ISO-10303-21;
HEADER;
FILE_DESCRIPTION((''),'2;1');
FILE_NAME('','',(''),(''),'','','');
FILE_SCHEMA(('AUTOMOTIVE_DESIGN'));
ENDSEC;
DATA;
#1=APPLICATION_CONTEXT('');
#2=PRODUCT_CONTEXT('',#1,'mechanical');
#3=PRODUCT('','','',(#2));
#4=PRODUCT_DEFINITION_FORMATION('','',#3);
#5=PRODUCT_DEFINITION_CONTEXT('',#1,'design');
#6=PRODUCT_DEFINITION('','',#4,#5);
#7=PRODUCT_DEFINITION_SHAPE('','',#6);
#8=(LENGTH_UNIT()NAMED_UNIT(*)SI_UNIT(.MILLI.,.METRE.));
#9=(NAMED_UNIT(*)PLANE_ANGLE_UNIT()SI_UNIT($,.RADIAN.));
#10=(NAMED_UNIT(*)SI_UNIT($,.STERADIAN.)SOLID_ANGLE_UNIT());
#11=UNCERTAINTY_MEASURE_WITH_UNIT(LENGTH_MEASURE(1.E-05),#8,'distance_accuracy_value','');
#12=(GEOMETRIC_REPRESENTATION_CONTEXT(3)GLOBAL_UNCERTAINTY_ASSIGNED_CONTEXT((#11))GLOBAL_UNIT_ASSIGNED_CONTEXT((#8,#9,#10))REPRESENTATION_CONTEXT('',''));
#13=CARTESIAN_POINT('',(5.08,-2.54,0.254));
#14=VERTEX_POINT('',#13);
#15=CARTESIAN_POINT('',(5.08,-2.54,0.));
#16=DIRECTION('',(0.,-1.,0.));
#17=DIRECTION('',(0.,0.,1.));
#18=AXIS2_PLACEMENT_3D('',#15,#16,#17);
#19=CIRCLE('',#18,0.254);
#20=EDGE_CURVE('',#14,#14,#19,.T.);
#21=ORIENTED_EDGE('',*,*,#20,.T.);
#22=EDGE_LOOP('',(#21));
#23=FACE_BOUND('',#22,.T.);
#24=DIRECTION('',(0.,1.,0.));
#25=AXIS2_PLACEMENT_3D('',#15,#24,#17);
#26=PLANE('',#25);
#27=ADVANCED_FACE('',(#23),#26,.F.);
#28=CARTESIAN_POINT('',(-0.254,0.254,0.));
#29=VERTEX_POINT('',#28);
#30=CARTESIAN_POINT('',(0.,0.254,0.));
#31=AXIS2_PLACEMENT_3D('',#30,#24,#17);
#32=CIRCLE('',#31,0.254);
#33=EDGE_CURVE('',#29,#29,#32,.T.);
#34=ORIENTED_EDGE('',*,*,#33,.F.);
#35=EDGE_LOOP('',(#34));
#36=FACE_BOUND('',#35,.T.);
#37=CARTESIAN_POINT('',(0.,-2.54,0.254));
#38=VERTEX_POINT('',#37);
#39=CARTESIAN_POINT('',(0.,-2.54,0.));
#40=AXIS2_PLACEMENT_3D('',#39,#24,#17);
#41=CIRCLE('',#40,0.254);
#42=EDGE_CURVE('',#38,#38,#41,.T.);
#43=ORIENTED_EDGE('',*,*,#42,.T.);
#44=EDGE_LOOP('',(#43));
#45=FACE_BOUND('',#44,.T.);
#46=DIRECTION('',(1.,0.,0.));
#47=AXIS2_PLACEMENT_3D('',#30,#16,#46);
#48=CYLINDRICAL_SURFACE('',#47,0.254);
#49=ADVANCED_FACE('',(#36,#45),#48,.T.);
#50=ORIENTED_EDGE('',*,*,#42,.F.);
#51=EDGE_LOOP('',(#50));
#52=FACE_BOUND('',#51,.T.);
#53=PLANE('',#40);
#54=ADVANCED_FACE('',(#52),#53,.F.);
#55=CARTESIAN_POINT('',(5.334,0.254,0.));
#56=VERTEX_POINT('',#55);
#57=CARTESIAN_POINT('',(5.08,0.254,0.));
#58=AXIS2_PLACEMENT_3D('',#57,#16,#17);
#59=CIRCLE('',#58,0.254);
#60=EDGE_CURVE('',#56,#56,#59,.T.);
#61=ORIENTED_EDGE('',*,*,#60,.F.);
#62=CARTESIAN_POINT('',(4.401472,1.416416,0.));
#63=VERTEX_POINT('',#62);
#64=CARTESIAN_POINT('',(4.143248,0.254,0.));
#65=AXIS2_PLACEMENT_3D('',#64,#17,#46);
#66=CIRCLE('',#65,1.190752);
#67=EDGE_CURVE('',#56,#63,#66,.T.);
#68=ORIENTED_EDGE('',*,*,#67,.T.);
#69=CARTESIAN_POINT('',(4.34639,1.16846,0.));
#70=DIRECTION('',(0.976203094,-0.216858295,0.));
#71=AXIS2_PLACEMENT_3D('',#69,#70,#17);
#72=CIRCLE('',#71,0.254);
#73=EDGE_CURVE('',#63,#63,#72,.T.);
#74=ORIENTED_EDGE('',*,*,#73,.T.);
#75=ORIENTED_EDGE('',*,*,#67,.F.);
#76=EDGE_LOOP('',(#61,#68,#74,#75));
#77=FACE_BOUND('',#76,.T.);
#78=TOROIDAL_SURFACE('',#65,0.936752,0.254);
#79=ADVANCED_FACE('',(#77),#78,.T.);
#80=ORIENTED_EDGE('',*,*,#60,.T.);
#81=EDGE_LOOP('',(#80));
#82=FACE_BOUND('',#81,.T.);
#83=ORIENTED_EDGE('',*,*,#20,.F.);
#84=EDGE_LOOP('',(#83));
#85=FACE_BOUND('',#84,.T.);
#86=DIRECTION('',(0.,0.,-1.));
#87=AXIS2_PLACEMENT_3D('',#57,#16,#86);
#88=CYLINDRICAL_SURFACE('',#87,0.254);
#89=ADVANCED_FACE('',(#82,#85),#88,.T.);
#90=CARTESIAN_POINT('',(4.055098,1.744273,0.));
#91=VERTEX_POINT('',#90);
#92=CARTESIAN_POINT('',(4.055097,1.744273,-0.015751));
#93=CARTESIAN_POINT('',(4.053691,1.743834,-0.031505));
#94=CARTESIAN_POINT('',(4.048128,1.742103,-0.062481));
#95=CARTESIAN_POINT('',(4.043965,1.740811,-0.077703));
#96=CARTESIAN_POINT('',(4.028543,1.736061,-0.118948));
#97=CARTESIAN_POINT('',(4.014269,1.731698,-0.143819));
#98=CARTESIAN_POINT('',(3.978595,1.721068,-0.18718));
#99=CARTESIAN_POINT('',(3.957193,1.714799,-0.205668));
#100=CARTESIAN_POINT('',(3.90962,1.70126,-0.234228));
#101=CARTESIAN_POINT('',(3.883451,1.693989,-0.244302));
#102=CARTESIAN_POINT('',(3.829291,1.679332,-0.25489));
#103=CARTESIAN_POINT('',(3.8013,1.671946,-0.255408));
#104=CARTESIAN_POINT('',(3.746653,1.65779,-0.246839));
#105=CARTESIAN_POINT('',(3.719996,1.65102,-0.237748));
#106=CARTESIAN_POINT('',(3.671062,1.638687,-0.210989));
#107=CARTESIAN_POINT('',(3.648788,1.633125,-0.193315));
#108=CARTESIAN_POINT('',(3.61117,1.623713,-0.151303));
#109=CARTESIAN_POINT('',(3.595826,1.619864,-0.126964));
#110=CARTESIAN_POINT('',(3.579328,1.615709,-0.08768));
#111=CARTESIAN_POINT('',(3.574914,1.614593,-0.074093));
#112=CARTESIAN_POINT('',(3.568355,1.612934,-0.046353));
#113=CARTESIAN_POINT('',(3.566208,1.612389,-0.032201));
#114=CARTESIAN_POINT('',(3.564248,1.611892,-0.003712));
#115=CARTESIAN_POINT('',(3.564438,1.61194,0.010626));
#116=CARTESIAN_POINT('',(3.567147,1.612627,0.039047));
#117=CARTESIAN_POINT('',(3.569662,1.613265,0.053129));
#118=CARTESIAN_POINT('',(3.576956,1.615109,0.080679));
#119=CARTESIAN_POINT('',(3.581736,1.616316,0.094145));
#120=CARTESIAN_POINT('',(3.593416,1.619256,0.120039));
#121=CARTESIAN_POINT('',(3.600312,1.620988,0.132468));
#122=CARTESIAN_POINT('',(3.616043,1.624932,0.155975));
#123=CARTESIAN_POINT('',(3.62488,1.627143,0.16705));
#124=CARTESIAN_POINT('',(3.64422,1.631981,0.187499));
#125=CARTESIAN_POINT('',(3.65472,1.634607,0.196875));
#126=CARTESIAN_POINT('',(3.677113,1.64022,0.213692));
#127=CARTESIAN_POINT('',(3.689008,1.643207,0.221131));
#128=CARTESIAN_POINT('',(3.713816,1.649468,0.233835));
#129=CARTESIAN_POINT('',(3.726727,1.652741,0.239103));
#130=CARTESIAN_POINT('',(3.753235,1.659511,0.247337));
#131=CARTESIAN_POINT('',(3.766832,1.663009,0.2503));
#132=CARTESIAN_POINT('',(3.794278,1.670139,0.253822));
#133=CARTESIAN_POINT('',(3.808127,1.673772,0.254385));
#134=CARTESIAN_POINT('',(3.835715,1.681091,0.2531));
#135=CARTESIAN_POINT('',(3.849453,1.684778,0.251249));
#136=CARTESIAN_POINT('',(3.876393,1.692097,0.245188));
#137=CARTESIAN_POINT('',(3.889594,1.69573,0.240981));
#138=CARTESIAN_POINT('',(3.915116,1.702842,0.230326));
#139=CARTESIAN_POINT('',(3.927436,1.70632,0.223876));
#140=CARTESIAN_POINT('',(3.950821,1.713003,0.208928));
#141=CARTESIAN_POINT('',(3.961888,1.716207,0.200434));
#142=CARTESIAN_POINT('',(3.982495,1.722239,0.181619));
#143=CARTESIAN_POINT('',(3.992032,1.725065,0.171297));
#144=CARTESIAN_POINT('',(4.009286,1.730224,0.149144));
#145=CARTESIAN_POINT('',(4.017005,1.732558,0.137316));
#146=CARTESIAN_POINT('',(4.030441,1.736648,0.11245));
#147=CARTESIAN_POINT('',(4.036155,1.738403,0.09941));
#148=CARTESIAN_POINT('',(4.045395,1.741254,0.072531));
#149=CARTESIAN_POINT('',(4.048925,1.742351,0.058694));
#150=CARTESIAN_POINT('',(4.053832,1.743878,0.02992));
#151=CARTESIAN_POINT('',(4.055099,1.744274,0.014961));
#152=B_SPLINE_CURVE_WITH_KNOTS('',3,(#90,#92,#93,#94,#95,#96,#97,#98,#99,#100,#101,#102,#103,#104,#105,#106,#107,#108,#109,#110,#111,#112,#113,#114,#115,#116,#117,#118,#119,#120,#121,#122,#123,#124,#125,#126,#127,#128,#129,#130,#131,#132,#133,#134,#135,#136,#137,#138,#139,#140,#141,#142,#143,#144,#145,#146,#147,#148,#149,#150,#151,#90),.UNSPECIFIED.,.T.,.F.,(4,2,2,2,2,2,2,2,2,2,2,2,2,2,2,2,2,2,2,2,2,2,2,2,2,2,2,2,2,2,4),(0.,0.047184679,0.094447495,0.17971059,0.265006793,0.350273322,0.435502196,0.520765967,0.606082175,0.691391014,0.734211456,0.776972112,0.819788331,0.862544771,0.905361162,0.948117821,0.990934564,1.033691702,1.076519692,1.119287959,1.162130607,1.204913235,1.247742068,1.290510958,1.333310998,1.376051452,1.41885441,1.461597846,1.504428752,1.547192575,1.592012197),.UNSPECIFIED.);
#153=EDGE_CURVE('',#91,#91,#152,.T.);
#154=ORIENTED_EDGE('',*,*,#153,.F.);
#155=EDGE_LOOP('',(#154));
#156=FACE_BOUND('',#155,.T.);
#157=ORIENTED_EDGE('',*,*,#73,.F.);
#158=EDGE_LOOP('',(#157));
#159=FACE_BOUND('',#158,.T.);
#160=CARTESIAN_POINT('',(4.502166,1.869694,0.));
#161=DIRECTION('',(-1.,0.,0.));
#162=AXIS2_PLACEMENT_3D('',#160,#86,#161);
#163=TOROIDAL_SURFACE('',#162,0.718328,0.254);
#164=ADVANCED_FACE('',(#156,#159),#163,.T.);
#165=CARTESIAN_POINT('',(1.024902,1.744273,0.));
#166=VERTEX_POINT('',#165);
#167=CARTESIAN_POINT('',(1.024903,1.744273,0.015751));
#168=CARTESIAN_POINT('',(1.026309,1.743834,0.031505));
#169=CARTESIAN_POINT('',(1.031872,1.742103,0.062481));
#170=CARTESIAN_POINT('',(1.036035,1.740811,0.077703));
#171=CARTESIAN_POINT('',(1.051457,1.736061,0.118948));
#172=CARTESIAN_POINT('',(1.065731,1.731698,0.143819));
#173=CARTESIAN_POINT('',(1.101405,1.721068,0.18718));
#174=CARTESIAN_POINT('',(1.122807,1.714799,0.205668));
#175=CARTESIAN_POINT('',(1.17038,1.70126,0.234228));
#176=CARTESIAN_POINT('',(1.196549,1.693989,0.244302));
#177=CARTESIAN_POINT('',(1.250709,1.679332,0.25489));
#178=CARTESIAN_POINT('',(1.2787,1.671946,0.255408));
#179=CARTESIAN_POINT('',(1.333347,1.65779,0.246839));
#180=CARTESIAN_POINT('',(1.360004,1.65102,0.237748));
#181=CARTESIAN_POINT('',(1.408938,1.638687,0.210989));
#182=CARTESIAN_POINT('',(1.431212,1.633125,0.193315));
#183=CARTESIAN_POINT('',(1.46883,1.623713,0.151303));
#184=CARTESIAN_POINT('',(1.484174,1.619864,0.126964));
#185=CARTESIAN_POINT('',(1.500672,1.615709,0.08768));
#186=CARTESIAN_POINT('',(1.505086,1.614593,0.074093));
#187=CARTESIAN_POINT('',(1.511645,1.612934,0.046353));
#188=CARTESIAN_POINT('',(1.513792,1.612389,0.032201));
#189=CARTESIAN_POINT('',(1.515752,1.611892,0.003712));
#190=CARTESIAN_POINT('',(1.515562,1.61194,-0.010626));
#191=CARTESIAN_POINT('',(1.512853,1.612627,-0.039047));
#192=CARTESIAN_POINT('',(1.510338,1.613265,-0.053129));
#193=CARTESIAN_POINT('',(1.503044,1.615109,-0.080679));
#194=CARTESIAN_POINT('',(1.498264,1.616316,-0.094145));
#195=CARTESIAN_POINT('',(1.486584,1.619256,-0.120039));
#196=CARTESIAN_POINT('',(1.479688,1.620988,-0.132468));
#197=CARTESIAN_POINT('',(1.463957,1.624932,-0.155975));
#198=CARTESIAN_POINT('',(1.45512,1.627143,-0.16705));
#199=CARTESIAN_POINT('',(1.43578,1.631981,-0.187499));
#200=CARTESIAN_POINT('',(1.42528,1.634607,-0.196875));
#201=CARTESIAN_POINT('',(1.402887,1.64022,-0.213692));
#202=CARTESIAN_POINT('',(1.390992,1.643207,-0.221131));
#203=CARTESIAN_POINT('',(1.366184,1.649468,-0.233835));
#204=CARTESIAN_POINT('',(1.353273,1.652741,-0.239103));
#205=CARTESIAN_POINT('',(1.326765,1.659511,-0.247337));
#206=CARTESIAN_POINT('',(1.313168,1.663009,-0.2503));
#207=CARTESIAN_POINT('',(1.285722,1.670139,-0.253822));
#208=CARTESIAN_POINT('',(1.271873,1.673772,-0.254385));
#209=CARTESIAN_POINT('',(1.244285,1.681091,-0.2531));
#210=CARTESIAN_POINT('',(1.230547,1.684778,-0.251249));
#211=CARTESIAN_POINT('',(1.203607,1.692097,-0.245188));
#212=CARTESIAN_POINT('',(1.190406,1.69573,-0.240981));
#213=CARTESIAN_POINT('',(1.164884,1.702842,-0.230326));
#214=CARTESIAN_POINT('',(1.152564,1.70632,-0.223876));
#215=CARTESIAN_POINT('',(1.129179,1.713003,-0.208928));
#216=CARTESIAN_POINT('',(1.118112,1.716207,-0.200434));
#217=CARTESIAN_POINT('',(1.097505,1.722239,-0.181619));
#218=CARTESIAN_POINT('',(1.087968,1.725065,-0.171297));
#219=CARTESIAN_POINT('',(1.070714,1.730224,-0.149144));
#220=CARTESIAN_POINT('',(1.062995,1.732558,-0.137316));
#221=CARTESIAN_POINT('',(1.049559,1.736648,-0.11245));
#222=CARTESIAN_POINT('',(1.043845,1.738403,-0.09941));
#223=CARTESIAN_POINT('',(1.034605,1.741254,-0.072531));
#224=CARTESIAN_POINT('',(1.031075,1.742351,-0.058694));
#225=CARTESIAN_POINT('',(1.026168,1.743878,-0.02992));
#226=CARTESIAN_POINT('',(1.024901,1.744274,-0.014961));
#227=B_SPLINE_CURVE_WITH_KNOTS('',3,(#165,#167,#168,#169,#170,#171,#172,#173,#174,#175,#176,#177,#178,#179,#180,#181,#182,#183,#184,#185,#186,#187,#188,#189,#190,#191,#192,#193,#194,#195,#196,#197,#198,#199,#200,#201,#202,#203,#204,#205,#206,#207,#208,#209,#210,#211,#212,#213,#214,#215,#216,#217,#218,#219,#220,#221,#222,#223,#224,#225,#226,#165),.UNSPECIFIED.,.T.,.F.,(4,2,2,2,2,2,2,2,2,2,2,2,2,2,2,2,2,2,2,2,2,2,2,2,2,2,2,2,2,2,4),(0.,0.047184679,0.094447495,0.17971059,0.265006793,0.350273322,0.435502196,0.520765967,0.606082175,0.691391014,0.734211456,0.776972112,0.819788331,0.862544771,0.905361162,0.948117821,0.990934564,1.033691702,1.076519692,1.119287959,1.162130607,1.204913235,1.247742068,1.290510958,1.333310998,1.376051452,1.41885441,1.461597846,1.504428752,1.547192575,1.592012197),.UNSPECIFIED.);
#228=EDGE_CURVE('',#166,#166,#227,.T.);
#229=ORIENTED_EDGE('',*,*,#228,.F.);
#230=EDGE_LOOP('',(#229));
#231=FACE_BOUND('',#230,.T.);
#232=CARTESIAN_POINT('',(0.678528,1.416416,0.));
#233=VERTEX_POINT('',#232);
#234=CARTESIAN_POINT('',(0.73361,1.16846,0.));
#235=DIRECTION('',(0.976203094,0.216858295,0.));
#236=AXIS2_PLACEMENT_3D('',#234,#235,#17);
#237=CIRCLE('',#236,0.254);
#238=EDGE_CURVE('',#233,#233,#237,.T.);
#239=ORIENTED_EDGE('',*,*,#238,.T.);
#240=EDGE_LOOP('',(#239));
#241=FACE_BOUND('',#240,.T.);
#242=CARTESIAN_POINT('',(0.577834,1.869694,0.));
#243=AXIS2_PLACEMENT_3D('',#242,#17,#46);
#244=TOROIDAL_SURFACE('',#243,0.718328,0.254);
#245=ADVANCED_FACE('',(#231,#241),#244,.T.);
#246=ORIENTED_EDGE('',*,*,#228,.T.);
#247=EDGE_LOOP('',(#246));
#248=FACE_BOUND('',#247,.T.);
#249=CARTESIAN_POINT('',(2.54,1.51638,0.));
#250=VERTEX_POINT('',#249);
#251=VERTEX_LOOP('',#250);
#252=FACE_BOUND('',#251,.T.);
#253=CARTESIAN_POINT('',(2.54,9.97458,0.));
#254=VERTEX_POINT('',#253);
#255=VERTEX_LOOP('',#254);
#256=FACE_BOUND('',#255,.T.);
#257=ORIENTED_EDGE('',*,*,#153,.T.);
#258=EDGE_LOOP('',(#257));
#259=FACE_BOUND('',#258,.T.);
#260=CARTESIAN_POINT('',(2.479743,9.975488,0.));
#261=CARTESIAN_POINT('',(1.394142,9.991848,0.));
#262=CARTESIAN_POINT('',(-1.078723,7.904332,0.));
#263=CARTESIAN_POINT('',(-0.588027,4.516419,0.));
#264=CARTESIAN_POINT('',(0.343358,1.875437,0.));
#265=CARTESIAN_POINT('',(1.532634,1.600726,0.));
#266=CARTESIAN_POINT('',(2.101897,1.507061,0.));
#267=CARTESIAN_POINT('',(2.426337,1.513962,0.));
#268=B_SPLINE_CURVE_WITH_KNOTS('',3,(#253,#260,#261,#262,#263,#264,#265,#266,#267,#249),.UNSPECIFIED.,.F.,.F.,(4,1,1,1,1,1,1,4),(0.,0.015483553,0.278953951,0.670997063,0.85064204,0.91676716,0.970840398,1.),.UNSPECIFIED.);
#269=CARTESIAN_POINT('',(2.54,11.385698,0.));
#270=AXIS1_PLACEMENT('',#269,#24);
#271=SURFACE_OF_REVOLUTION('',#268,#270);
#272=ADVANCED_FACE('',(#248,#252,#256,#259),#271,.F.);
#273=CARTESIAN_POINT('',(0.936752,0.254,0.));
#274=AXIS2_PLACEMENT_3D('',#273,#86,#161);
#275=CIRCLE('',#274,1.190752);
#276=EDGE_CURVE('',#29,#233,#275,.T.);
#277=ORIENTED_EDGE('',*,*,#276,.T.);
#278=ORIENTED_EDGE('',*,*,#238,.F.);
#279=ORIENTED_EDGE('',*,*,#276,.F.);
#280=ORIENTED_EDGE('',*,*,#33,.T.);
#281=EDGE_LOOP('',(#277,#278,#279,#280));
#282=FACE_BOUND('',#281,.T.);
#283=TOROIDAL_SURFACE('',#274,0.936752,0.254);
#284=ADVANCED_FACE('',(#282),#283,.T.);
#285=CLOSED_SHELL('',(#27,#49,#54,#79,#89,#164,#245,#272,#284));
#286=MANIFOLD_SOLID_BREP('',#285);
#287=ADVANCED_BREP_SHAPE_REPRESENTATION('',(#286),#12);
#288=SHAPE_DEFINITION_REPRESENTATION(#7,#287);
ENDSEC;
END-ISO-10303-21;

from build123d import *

# Parameters (mm, degrees)
SKETCH2_R = 0.254


# Read off the part's stored shape, not the designer's step: Boss-Revolve1
with BuildPart() as part:
    # Base-Sweep: sweep along a path in Sketch1
    with BuildLine(Plane.XY) as base_sweep_path:
        Line((0, -2.54), (0, 0.254))
        ThreePointArc((0, 0.254), (0.206067938, 0.840178395), (0.733609559, 1.1684602))
        ThreePointArc((0.733609559, 1.1684602), (1.13814331, 1.420195921), (1.296162, 1.869694))
    # Sketch2 → Base-Sweep (sweep)
    with BuildSketch(Plane(origin=(0, -2.54, 0), x_dir=(-1, 0, 0), z_dir=(0, 1, 0))):
        Circle(SKETCH2_R)
    base_sweep = sweep(path=base_sweep_path.line)

    # Boss-Revolve1 outline → Boss-Revolve1 (revolve)
    with BuildSketch(Plane(origin=(2.54, 0, 0), x_dir=(1, 0, 0), z_dir=(0, 0, 1))):
        with BuildLine():
            add(Edge.make_bspline(
                [(0, 9.97458), (0.034789438, 9.975104259), (0.069578876, 9.975628519), (0.104334188, 9.975628519)],
                knots=[0, 0, 0, 0, 0.008939428, 0.008939428, 0.008939428, 0.008939428], degree=3))
            Line((0, 9.97458), (0, 1.869694))
            Line((0, 1.869694), (0.989838, 1.869694))
            Line((0.989838, 1.869694), (0.989838, 9.79047937))
            add(Edge.make_bspline(
                [(0.104334188, 9.975628519), (0.129776876, 9.97562852), (0.431674151, 9.972292434), (0.729105194, 9.900343228), (0.989838, 9.79047937)],
                knots=[0.008939428, 0.008939428, 0.008939428, 0.008939428, 0.015483553, 0.086646407, 0.086646407, 0.086646407, 0.086646407], degree=3))
        make_face()
        with BuildLine():
            Line((0.989838, 1.869694), (0, 1.869694))
            Line((0, 1.869694), (0, 1.51638))
            add(Edge.make_bspline(
                [(0.196700703, 1.513588098), (0.131247283, 1.513588098), (0.065623641, 1.514984049), (0, 1.51638)],
                knots=[0.983164699, 0.983164699, 0.983164699, 0.983164699, 1, 1, 1, 1], degree=3))
            add(Edge.make_bspline(
                [(0.989838, 1.605037356), (0.981620664, 1.603413128), (0.763396717, 1.560584076), (0.502269322, 1.517618443), (0.244615949, 1.513588098), (0.196700703, 1.513588098)],
                knots=[0.914652434, 0.914652434, 0.914652434, 0.914652434, 0.91676716, 0.970840398, 0.983164699, 0.983164699, 0.983164699, 0.983164699], degree=3))
            Line((0.989838, 1.605037356), (0.989838, 1.869694))
        make_face()
        with BuildLine():
            add(Edge.make_bspline(
                [(0.989838, 9.79047937), (1.16524628, 9.716568339), (1.335381856, 9.62275499), (1.497838, 9.513170946)],
                knots=[0.086646407, 0.086646407, 0.086646407, 0.086646407, 0.134521294, 0.134521294, 0.134521294, 0.134521294], degree=3))
            Line((0.989838, 9.79047937), (0.989838, 1.869694))
            Line((0.989838, 1.869694), (1.497838, 1.869694))
            Line((1.497838, 1.869694), (1.497838, 9.513170946))
        make_face()
        with BuildLine():
            Line((1.497838, 1.869694), (0.989838, 1.869694))
            Line((0.989838, 1.869694), (0.989838, 1.605037356))
            add(Edge.make_bspline(
                [(1.497838, 1.737836694), (1.336832685, 1.678684631), (1.162426271, 1.639150937), (0.989838, 1.605037356)],
                knots=[0.870236962, 0.870236962, 0.870236962, 0.870236962, 0.914652434, 0.914652434, 0.914652434, 0.914652434], degree=3))
            Line((1.497838, 1.737836694), (1.497838, 1.869694))
        make_face()
        with BuildLine():
            add(Edge.make_bspline(
                [(1.497838, 9.513170946), (1.987948233, 9.182569344), (2.943587185, 8.104298759), (3.195965667, 6.870404718), (3.195965666, 6.150823028)],
                knots=[0.134521294, 0.134521294, 0.134521294, 0.134521294, 0.278953951, 0.462984826, 0.462984826, 0.462984826, 0.462984826], degree=3))
            Line((1.497838, 9.513170946), (1.497838, 1.869694))
            Line((1.497838, 1.869694), (1.771903838, 1.869694))
            add(Edge.make_bspline(
                [(3.195965666, 6.150823028), (3.195965665, 5.337471481), (2.865595277, 3.784051735), (2.314325025, 2.209352107), (1.771903838, 1.869694)],
                knots=[0.462984826, 0.462984826, 0.462984826, 0.462984826, 0.670997063, 0.843382412, 0.843382412, 0.843382412, 0.843382412], degree=3))
        make_face()
        with BuildLine():
            Line((1.771903838, 1.869694), (1.497838, 1.869694))
            Line((1.497838, 1.869694), (1.497838, 1.737836694))
            add(Edge.make_bspline(
                [(1.771903838, 1.869694), (1.749060972, 1.855390051), (1.662641881, 1.804930677), (1.568869253, 1.763933007), (1.497838, 1.737836694)],
                knots=[0.843382412, 0.843382412, 0.843382412, 0.843382412, 0.85064204, 0.870236962, 0.870236962, 0.870236962, 0.870236962], degree=3))
        make_face()
    revolve(axis=Axis((2.54, 0, 0), (0, 1, 0)))

    # Mirror1: Base-Sweep across plane
    add(base_sweep.mirror(Plane(origin=(2.54, 0, 0), x_dir=(0, 0, 1), z_dir=(1, 0, 0))))


solid = part.part
